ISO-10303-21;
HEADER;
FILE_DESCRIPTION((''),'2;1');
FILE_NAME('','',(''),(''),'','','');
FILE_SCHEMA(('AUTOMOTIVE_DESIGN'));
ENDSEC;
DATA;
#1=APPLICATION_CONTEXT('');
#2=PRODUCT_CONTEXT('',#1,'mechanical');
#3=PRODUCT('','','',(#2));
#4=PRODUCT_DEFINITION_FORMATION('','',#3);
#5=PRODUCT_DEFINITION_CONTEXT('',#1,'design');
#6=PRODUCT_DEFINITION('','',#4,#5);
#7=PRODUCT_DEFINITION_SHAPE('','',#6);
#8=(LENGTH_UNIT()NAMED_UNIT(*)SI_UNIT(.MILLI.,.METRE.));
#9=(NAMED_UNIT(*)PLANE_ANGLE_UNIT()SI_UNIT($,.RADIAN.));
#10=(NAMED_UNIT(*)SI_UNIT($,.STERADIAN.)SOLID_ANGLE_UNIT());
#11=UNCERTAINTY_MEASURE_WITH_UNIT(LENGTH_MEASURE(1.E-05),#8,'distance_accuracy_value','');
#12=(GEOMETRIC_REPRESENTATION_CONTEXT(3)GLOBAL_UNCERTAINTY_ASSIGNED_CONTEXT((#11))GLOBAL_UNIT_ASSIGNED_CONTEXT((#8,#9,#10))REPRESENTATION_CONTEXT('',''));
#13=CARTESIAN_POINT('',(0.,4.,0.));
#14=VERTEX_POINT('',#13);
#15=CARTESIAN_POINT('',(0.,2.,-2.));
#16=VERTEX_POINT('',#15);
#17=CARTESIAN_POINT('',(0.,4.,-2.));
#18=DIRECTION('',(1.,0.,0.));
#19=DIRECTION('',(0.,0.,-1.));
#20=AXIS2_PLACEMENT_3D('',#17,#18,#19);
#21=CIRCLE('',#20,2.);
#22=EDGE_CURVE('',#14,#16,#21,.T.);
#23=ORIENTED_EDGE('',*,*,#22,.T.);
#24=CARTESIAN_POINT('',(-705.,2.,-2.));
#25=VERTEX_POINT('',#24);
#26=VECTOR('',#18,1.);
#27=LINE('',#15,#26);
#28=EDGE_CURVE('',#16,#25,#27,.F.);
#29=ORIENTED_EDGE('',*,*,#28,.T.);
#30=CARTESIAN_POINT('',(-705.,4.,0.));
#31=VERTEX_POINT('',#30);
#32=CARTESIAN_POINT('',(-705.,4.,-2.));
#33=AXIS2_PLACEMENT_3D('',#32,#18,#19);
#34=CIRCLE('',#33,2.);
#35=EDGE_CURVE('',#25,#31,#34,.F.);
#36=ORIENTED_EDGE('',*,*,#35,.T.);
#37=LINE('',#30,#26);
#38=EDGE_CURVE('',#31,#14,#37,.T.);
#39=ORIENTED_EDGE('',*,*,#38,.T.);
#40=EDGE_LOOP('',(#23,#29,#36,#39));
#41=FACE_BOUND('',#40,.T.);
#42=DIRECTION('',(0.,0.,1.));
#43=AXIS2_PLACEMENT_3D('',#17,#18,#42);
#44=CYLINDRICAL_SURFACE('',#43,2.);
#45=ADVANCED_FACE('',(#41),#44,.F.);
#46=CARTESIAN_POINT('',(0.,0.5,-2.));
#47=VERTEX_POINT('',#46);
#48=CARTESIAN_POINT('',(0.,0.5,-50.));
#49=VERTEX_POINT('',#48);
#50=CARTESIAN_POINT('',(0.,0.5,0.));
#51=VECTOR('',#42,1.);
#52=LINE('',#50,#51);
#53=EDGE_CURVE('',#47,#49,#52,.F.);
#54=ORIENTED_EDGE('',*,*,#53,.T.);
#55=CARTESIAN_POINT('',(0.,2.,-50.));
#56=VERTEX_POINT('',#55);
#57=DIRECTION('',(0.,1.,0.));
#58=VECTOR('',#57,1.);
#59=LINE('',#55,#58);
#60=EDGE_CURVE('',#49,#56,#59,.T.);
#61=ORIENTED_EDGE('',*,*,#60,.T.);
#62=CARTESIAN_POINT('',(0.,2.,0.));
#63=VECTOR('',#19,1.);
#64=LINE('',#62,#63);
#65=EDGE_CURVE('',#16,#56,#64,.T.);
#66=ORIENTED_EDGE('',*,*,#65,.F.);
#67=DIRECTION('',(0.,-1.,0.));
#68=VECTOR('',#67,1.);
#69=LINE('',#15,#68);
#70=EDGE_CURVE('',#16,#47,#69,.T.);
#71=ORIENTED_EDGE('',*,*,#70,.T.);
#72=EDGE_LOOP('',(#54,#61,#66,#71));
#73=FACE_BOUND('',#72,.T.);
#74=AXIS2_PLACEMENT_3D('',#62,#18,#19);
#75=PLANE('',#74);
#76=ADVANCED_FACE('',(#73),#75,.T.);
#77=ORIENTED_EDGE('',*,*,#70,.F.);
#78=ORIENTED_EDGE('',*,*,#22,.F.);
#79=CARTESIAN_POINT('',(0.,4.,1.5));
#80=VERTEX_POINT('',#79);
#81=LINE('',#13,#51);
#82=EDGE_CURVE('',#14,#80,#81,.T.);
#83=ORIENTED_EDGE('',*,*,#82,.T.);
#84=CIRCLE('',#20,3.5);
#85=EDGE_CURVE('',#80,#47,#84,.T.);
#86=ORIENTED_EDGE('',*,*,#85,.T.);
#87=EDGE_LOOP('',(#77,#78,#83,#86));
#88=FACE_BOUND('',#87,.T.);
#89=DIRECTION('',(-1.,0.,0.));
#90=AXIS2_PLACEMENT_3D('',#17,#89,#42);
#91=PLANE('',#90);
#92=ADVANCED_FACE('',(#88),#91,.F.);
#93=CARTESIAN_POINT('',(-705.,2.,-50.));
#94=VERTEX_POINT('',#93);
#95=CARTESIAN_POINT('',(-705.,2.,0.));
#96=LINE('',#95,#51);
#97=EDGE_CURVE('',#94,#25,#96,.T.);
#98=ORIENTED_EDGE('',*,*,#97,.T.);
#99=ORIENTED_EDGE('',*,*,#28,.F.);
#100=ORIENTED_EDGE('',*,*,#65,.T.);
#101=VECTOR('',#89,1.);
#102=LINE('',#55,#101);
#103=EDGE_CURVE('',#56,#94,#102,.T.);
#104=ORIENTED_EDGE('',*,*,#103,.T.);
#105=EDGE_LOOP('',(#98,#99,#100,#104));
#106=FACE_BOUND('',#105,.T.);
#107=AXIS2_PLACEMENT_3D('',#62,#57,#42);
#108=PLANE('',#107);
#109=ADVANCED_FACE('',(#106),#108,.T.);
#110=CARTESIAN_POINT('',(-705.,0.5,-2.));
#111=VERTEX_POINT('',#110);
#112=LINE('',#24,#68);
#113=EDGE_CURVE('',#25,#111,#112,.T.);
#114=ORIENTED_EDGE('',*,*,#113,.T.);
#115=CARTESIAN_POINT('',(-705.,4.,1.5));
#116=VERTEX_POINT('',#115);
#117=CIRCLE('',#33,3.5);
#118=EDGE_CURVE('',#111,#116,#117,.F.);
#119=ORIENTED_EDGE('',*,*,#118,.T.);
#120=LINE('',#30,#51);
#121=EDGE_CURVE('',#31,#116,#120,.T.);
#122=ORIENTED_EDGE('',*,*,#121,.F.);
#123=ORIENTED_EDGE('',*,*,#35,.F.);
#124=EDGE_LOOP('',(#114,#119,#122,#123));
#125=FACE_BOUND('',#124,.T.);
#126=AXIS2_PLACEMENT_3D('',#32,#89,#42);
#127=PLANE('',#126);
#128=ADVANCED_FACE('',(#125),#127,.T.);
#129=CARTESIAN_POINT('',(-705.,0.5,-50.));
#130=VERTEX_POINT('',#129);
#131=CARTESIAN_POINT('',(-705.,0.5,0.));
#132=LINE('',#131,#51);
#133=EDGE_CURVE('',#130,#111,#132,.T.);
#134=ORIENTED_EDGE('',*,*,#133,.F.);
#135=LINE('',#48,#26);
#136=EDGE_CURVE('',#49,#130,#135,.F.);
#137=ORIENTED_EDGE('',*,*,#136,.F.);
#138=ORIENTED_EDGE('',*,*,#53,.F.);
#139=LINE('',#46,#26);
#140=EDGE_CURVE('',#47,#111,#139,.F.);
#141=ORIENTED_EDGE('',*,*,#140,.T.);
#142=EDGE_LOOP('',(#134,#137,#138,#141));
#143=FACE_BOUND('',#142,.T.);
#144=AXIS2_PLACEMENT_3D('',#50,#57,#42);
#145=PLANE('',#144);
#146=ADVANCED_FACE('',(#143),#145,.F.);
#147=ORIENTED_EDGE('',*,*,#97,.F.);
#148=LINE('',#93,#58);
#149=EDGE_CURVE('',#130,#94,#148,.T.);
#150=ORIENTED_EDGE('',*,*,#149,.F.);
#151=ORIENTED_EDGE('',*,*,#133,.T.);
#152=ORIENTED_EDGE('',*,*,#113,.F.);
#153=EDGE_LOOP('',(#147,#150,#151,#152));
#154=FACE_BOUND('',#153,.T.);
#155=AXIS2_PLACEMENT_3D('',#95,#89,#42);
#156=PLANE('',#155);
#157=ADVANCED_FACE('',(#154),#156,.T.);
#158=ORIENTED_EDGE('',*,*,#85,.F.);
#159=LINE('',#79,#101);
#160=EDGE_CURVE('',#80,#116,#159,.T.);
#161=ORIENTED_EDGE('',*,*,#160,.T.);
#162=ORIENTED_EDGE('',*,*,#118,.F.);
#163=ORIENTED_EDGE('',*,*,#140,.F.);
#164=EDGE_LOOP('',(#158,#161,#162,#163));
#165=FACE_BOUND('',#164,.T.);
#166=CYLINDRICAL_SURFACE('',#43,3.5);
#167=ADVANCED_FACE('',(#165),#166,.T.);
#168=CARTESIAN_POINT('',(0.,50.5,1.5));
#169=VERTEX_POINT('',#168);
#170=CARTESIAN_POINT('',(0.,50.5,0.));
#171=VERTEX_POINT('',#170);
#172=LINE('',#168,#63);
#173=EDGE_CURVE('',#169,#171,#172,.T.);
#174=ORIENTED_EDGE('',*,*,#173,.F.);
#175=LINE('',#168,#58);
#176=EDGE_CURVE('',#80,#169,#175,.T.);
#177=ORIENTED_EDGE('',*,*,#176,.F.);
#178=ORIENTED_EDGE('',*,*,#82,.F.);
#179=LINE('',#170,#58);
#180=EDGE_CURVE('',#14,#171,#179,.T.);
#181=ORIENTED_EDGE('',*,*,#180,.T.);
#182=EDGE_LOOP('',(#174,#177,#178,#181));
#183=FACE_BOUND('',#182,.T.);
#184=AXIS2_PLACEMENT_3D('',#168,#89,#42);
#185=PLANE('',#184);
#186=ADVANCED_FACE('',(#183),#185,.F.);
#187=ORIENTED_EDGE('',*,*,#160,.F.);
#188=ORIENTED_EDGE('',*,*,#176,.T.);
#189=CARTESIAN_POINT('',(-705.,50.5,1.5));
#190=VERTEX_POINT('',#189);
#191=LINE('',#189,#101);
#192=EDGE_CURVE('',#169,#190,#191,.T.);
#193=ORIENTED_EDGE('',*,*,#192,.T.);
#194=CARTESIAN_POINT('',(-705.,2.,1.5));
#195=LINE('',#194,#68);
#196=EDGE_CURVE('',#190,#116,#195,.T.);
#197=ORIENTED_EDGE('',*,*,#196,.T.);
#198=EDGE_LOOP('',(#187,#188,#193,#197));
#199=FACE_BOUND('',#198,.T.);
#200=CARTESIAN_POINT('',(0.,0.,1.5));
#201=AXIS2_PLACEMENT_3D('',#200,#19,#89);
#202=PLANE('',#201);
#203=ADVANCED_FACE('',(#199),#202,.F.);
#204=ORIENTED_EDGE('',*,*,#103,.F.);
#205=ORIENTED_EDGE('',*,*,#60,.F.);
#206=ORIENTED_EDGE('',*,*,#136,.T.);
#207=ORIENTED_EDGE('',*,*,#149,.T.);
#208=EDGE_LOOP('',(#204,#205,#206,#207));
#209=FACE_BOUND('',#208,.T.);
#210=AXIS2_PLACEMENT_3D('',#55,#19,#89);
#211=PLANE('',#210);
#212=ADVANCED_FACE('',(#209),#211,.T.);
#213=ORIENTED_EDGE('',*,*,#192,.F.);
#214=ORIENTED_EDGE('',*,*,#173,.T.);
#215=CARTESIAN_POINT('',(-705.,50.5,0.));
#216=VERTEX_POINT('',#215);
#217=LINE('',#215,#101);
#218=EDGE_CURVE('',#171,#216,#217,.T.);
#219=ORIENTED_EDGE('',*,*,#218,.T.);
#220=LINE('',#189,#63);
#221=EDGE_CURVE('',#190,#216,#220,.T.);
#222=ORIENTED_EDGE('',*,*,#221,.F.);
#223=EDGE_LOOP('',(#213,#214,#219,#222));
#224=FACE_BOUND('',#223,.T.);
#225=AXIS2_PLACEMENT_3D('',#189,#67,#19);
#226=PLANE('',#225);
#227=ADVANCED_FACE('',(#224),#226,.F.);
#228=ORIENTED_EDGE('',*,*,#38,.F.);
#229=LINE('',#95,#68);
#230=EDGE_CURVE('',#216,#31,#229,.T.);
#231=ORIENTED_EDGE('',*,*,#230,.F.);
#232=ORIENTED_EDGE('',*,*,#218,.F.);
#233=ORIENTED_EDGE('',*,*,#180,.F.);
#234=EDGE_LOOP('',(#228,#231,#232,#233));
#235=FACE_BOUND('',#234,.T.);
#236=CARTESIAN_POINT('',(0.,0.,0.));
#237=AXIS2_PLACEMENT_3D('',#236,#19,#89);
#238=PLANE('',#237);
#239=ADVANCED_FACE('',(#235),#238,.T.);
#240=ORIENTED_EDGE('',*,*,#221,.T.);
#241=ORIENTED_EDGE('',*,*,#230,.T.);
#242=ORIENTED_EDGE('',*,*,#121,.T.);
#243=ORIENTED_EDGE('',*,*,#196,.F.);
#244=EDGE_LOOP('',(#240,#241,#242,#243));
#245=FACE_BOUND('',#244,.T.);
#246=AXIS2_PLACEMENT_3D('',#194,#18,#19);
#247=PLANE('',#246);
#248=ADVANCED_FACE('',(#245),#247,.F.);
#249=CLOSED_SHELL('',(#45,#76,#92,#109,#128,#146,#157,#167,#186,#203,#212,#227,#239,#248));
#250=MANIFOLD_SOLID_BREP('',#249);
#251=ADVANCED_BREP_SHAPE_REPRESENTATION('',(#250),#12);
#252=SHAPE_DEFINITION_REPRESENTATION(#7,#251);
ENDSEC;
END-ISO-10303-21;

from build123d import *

# Parameters (mm, degrees)
SKETCH1_W                    = 705
SKETCH1_H                    = 50
BOSS_EXTRUDE1_DEPTH          = 2
CONVERT_SOLID1_OUTLINE_W     = 705
CONVERT_SOLID1_OUTLINE_H     = 50
CONVERT_SOLID1_DEPTH         = 0.5
EDGE_FLANGE1_STRIP_W         = 10
EDGE_FLANGE1_STRIP_H         = 1.5
EDGE_FLANGE1_STRIP_CUT_DEPTH = 705
EDGE_FLANGE1_DEPTH           = 705


# Read off the part's stored shape, not the designer's step: Convert-Solid1
# Sheet-metal steps are written as plain solids
with BuildPart() as part:
    # Sketch1 → Boss-Extrude1 (new body)
    with BuildSketch(Plane(origin=(0, 0, 0), x_dir=(1, 0, 0), z_dir=(0, 1, 0))):
        with Locations((-352.5, 25)):
            Rectangle(SKETCH1_W, SKETCH1_H)
    extrude(amount=BOSS_EXTRUDE1_DEPTH)

    # Convert-Solid1 outline → Convert-Solid1 (cut)
    with BuildSketch(Plane(origin=(0, 0, 0), x_dir=(1, 0, 0), z_dir=(0, 1, 0))):
        with Locations((-352.5, 25)):
            Rectangle(CONVERT_SOLID1_OUTLINE_W, CONVERT_SOLID1_OUTLINE_H)
    extrude(amount=CONVERT_SOLID1_DEPTH, mode=Mode.SUBTRACT)

    # Edge-Flange1 strip (across the edge) → Edge-Flange1 strip cut (cut)
    with BuildSketch(Plane(origin=(-705, 2, 0), x_dir=(0, 0, -1), z_dir=(1, 0, 0))):
        with Locations((-3, -0.75)):
            Rectangle(EDGE_FLANGE1_STRIP_W, EDGE_FLANGE1_STRIP_H)
    extrude(amount=EDGE_FLANGE1_STRIP_CUT_DEPTH, mode=Mode.SUBTRACT)

    # Edge-Flange1 section (across the edge) → Edge-Flange1 (add)
    with BuildSketch(Plane(origin=(-705, 2, 0), x_dir=(0, 0, -1), z_dir=(1, 0, 0))):
        with BuildLine():
            Line((-1.5, 2), (-1.5, 48.5))
            Line((-1.5, 48.5), (0, 48.5))
            Line((0, 48.5), (0, 2))
            ThreePointArc((0, 2), (0.585786438, 0.585786438), (2, 0))
            Line((2, 0), (2, -1.5))
            ThreePointArc((2, -1.5), (-0.474873734, -0.474873734), (-1.5, 2))
        make_face()
    extrude(amount=EDGE_FLANGE1_DEPTH)


solid = part.part
